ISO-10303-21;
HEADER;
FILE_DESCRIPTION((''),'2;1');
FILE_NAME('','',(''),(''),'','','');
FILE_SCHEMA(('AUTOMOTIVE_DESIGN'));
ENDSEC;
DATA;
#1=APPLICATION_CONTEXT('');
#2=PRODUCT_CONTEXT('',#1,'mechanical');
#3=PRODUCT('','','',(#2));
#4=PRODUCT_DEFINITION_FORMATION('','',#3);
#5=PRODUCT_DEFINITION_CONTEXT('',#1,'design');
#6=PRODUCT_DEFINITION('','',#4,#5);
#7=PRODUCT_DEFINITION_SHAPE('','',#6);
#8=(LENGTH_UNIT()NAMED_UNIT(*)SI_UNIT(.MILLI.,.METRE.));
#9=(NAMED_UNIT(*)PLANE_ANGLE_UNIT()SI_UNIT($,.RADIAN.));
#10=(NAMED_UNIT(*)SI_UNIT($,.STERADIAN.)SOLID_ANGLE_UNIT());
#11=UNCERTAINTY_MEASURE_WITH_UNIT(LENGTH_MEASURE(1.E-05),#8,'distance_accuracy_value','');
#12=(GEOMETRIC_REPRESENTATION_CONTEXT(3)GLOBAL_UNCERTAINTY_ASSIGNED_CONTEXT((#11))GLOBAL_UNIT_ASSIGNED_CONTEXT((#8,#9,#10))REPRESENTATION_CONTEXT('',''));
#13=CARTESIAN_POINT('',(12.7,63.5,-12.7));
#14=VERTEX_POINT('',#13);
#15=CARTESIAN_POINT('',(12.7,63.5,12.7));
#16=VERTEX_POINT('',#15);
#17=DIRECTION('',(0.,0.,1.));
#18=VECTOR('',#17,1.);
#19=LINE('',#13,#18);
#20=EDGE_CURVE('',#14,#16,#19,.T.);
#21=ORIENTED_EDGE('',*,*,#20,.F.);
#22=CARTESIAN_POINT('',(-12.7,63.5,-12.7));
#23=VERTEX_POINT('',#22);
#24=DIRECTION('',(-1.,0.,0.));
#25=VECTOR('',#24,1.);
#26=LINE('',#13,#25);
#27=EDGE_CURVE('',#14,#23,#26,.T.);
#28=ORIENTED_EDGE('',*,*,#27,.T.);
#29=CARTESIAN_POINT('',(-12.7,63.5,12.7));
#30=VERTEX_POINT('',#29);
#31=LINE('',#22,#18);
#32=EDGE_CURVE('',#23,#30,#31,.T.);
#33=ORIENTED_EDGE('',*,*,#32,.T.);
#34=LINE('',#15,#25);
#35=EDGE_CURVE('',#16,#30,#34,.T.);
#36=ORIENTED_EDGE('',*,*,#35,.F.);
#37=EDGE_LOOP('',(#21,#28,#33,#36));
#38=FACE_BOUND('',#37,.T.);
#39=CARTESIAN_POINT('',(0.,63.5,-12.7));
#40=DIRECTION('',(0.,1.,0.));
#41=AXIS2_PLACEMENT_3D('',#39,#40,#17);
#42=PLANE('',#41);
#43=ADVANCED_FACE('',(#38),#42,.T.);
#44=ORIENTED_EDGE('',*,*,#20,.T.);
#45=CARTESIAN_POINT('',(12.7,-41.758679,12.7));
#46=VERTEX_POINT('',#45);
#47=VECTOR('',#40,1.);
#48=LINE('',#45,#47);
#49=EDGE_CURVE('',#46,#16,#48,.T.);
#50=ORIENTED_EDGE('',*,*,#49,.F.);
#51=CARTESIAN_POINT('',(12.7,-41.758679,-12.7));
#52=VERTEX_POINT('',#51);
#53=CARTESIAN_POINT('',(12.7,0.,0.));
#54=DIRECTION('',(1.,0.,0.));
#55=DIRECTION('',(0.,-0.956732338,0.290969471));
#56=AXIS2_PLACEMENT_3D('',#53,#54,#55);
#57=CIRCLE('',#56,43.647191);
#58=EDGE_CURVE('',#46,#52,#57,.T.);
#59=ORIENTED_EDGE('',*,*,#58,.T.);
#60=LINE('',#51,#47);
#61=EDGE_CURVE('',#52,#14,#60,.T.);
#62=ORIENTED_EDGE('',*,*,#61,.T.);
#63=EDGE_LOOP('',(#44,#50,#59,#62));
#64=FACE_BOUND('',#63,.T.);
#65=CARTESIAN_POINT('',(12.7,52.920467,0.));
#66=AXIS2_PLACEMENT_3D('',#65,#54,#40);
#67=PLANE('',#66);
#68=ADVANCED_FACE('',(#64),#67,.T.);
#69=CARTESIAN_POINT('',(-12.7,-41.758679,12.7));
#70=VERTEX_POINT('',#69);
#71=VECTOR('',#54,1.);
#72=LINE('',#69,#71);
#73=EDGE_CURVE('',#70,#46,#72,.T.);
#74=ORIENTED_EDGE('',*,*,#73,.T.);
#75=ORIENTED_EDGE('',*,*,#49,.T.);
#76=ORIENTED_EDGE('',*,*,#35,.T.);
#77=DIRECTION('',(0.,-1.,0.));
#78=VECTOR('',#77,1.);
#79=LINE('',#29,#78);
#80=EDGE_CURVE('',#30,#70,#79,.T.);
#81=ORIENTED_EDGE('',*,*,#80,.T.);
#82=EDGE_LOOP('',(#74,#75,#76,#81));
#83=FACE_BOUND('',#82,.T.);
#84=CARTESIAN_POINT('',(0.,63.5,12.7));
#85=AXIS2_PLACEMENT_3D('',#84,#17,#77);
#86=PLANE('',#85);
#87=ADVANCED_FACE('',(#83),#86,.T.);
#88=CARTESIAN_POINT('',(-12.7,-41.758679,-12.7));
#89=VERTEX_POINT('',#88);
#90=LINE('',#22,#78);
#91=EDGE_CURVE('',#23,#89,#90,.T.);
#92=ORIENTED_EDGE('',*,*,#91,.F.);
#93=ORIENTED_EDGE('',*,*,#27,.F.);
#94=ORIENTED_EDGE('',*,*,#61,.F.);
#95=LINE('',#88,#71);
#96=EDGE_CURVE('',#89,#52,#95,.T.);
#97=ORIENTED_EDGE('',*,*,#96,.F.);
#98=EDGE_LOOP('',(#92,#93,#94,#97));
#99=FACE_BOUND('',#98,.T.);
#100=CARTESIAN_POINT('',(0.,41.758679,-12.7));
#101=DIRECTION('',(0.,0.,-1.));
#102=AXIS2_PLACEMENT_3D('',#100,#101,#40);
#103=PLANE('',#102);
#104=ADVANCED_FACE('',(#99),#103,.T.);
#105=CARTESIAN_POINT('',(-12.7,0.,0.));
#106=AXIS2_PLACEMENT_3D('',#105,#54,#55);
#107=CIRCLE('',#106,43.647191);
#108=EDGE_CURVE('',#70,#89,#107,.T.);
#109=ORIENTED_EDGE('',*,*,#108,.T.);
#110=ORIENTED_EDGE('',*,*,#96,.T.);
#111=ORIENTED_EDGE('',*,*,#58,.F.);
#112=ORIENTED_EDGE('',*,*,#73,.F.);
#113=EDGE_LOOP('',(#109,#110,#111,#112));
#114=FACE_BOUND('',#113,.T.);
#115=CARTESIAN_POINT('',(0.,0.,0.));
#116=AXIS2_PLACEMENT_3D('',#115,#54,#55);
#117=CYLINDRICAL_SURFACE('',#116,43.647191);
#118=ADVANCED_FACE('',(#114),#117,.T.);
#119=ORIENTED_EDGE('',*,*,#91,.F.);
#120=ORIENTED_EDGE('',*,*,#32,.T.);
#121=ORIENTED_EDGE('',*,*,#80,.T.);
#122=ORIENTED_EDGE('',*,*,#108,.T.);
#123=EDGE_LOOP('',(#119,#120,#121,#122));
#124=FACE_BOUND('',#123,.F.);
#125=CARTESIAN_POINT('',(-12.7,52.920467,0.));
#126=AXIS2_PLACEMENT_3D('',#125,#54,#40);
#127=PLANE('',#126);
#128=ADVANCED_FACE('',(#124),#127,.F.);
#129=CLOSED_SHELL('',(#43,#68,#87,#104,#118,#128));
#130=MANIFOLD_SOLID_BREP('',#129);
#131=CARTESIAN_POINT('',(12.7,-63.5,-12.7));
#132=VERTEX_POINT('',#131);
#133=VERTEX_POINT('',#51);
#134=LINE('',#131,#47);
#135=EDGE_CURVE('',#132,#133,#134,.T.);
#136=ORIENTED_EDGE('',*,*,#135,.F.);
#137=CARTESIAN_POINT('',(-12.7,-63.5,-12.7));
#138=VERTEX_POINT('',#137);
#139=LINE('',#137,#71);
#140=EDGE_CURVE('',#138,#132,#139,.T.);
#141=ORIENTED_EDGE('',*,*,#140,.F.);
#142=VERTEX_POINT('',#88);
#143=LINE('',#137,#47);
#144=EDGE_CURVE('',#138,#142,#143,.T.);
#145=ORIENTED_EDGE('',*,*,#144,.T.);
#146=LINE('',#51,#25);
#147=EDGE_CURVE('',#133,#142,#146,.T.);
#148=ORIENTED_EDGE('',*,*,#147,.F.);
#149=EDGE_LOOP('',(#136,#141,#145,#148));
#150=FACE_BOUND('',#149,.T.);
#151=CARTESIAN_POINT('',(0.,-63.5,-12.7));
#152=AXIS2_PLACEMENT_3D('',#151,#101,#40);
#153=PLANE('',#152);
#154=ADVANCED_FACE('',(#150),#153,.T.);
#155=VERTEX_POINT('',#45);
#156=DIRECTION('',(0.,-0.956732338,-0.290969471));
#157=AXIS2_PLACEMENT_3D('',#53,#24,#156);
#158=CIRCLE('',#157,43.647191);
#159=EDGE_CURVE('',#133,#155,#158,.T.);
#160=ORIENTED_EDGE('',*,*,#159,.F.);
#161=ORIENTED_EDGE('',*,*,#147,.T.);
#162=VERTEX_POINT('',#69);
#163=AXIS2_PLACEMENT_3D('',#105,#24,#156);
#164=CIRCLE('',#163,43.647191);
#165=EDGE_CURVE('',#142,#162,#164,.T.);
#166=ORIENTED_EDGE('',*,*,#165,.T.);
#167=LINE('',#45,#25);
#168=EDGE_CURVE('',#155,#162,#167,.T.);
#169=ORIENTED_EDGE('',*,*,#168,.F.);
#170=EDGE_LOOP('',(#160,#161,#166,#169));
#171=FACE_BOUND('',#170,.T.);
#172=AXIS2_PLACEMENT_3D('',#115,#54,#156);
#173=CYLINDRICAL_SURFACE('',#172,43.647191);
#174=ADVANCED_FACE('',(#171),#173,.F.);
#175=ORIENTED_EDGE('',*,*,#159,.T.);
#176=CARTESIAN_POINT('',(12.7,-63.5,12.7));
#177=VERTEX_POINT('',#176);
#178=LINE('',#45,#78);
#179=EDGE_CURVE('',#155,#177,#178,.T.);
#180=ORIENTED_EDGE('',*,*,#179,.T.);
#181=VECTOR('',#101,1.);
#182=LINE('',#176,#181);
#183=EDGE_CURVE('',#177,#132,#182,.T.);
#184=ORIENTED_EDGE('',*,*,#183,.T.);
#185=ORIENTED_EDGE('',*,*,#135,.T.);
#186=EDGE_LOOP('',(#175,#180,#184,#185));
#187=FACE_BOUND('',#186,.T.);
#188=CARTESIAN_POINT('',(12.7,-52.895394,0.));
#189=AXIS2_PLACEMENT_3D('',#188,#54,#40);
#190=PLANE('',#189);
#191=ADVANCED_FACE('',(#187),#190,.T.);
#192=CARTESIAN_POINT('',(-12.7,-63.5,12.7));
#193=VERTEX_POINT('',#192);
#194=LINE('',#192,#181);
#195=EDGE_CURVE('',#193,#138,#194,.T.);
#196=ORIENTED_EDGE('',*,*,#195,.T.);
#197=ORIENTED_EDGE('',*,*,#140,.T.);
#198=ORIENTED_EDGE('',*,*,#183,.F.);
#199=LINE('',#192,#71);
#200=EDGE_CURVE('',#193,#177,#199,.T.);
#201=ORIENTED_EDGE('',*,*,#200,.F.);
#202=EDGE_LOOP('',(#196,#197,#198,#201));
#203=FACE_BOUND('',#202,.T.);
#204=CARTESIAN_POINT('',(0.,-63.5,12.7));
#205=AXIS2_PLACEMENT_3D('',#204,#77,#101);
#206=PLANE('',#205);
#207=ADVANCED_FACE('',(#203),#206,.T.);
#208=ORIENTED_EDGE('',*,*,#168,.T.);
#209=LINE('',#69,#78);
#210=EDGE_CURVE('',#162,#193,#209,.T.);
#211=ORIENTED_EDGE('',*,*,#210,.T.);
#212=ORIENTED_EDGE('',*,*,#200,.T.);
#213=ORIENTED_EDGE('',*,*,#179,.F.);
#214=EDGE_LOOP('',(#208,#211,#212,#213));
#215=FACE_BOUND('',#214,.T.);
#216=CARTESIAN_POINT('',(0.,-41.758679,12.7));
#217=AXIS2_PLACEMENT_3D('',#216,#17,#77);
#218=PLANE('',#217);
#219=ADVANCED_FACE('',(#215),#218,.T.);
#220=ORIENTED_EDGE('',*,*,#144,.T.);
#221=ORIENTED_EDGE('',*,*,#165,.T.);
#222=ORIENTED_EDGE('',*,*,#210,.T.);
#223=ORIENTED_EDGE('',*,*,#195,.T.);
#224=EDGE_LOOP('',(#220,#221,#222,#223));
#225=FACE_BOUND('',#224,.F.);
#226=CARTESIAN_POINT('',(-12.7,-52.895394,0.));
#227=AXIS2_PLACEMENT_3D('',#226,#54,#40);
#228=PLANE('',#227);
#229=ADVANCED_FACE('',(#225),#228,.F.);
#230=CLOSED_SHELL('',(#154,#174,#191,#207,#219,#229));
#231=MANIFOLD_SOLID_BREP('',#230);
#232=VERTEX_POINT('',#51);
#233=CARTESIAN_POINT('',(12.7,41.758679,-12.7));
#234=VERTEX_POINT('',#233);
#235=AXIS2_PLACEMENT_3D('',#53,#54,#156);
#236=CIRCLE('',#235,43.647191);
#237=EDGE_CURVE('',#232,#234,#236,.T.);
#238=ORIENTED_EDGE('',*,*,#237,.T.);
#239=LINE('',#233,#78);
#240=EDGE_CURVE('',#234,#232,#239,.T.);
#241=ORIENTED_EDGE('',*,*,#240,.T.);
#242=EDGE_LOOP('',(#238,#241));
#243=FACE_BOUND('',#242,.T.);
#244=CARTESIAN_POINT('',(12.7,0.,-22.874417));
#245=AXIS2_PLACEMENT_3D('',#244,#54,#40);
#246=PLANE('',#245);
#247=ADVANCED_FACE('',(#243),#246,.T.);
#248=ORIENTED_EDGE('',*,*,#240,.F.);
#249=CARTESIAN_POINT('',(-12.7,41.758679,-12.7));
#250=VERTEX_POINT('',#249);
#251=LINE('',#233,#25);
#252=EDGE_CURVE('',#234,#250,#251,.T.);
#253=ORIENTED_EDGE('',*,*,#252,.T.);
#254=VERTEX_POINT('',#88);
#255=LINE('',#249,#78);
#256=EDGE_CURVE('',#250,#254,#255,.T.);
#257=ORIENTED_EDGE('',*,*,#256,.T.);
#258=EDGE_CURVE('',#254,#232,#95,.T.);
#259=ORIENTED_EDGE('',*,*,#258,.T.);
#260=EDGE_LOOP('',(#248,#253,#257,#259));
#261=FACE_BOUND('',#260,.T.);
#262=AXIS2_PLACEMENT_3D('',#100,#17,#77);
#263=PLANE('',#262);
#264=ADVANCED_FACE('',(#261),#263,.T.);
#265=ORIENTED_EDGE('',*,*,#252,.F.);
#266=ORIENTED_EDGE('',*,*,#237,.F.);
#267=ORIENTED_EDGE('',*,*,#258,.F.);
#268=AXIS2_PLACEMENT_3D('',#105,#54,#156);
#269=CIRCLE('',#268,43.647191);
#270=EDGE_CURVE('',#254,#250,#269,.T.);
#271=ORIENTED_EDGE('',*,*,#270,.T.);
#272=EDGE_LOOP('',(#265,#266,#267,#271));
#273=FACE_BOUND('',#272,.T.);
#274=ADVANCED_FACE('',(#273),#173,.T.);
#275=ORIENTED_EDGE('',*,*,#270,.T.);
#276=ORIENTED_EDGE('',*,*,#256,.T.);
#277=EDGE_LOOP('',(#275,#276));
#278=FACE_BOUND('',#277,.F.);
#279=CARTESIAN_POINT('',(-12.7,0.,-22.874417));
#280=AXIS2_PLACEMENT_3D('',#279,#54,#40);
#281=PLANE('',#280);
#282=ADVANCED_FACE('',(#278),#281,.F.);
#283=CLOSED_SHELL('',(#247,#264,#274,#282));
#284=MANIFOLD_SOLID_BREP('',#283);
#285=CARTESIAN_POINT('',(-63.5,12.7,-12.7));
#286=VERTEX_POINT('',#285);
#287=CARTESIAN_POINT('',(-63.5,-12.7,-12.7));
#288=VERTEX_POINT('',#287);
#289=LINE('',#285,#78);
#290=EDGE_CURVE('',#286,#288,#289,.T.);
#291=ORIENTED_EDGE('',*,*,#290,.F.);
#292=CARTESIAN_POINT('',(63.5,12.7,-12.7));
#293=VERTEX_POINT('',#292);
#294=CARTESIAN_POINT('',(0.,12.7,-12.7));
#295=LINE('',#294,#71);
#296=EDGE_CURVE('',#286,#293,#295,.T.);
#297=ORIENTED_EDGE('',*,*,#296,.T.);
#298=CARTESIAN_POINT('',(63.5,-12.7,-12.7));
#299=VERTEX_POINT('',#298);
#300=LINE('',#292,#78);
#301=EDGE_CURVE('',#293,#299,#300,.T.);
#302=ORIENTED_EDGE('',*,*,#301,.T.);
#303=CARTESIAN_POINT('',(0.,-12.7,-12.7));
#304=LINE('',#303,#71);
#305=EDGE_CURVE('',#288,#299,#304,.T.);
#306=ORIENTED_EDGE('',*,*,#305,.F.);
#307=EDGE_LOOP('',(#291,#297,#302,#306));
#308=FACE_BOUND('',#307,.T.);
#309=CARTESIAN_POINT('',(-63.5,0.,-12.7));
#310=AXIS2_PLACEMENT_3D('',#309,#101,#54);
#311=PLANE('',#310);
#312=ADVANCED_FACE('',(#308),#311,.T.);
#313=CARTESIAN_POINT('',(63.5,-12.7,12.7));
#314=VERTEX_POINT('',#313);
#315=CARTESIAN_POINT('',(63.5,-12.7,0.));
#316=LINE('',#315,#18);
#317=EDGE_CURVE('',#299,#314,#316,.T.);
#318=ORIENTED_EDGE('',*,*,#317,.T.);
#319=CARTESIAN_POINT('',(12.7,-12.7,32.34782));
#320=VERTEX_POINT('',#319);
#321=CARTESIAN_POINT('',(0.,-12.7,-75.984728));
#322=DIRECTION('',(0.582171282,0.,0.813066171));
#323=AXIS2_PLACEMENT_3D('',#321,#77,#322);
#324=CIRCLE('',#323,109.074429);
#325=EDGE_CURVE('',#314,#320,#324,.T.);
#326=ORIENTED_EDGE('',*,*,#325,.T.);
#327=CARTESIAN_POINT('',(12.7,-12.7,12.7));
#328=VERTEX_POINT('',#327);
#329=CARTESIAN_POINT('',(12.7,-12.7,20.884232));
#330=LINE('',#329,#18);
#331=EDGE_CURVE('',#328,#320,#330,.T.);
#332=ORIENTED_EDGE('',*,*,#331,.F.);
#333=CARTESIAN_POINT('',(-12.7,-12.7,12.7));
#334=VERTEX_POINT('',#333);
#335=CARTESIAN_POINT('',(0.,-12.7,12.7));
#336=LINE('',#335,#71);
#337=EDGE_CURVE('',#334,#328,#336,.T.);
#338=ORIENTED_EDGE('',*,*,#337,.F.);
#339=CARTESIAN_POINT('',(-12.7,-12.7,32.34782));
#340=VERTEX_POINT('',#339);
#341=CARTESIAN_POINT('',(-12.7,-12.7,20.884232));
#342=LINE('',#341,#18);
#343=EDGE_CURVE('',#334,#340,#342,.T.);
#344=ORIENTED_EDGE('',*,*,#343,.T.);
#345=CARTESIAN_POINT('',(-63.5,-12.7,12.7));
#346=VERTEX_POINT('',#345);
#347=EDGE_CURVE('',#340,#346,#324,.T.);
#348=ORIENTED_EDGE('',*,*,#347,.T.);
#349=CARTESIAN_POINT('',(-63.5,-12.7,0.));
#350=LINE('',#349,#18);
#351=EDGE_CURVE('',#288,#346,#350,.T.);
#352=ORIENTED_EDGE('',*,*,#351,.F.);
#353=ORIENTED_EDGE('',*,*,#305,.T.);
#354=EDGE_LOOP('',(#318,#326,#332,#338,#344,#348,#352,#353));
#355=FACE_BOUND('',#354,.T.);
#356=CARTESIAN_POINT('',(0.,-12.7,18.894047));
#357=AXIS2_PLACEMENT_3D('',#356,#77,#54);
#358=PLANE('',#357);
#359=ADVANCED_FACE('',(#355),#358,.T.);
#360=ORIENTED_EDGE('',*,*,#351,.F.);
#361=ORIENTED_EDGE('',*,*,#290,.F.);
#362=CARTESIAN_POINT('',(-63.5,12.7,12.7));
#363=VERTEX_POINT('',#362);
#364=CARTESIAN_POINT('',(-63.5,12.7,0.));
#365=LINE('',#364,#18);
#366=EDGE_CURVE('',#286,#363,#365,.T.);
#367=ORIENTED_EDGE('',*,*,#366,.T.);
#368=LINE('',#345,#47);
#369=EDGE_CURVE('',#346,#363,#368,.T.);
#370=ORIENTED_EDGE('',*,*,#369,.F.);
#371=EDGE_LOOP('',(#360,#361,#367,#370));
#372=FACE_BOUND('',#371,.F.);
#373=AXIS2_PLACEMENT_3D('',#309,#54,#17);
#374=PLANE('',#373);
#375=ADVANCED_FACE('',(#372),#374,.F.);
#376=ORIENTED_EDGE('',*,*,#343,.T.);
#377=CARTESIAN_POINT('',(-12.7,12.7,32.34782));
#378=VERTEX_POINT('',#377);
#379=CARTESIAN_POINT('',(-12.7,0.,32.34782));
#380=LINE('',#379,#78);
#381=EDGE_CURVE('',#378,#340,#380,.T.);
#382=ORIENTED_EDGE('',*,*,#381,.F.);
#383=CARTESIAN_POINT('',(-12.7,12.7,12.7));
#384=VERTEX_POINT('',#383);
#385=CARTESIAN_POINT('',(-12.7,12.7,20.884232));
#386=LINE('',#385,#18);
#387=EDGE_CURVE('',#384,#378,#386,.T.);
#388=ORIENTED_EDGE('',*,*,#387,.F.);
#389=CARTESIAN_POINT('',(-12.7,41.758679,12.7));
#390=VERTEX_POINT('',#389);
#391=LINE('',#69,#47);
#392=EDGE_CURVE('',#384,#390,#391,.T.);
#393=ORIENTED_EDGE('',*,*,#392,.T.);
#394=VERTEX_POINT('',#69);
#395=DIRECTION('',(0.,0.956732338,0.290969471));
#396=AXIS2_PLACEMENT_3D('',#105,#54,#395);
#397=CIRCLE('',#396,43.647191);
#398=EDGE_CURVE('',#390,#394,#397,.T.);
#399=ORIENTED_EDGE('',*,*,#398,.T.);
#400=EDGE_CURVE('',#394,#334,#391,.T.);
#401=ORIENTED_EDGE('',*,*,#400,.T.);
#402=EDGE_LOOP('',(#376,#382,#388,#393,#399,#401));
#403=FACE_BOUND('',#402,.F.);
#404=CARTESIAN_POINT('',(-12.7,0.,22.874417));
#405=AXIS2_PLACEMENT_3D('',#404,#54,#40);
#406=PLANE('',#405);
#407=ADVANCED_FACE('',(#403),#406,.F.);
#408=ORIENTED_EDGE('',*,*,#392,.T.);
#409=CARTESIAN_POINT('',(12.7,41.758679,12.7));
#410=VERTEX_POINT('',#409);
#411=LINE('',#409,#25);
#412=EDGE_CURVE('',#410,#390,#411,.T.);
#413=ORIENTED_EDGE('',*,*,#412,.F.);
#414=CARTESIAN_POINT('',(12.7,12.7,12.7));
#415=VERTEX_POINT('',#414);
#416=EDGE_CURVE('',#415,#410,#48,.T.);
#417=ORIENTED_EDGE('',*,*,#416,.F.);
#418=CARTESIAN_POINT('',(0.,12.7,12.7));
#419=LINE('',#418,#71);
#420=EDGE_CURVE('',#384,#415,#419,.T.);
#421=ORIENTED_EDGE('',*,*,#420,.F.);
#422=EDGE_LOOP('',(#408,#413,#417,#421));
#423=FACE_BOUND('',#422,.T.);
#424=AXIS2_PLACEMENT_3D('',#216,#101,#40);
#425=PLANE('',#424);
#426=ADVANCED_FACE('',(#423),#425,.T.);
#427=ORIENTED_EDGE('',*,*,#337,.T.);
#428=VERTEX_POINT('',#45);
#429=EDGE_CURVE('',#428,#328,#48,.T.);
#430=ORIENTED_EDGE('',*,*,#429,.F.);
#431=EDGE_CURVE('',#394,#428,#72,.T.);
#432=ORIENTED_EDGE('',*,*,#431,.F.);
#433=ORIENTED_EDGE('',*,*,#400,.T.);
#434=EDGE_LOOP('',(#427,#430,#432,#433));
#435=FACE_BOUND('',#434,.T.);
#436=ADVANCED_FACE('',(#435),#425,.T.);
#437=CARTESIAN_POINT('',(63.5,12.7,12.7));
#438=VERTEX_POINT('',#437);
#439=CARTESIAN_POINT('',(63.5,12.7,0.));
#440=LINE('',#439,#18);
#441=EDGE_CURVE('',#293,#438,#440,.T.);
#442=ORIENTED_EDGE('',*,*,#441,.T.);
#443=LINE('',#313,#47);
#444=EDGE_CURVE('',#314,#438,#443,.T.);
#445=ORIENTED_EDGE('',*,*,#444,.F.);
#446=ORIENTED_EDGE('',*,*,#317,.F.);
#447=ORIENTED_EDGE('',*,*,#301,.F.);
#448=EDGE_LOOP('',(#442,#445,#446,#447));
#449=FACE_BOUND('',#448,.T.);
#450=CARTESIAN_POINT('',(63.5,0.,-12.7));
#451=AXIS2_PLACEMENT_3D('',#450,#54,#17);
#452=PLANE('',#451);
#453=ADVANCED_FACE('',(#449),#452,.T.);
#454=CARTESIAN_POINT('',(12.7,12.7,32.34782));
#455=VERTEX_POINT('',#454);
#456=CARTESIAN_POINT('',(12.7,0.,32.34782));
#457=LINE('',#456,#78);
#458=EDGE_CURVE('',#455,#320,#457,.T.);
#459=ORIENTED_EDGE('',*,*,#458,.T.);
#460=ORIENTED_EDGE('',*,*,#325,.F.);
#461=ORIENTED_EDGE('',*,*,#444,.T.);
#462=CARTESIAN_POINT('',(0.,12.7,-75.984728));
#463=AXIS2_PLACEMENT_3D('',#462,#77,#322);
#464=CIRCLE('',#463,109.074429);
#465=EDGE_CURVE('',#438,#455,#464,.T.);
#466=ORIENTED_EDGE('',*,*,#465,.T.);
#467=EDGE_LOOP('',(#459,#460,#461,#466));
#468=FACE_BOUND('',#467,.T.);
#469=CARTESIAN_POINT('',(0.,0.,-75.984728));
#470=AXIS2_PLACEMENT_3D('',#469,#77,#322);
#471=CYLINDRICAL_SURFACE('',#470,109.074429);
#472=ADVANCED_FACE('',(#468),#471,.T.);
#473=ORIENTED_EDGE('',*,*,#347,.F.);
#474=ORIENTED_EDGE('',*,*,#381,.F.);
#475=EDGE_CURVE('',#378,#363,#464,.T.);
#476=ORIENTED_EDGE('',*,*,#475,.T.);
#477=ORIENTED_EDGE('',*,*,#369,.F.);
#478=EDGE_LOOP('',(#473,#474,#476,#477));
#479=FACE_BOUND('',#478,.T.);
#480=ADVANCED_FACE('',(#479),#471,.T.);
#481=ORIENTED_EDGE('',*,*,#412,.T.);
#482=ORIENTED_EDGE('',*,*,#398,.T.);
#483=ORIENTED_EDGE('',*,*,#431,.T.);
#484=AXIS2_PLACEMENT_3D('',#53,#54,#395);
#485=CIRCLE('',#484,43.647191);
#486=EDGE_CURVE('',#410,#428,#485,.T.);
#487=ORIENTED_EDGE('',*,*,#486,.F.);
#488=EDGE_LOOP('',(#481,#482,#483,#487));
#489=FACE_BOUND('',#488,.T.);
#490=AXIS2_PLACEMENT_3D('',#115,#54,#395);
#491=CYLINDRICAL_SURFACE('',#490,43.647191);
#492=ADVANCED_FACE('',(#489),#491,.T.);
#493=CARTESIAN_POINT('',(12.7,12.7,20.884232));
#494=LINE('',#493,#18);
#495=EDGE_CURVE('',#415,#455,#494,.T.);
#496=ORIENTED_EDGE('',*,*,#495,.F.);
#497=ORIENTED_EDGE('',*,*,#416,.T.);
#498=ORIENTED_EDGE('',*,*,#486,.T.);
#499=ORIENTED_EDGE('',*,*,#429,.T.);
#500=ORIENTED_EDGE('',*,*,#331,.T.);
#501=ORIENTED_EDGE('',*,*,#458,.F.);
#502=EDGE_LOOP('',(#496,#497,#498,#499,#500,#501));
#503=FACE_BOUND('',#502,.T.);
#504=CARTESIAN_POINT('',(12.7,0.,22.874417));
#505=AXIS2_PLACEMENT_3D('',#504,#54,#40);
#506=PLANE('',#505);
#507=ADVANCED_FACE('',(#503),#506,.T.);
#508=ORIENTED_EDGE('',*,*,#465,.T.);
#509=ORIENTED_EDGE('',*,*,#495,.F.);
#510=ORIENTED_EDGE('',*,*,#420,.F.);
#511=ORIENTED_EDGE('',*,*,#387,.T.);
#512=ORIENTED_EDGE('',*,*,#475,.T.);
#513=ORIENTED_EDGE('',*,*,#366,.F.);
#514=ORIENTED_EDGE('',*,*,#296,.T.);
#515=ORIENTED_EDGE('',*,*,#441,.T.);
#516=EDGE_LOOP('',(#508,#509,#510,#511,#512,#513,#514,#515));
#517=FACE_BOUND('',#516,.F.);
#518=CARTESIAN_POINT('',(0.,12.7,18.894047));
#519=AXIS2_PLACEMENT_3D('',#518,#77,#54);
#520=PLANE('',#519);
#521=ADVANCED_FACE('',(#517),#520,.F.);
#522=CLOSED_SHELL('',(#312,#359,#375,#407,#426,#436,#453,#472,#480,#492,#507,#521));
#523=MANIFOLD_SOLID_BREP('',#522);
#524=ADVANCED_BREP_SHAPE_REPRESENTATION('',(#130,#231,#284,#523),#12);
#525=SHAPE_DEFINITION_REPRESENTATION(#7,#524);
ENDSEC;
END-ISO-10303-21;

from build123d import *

# Parameters (mm, degrees)
F0_W     = 127
F0_H     = 25.4
F2_DEPTH = 12.7
F3_DEPTH = 12.7
F4_DEPTH = 12.7
F5_DEPTH = 12.7
F6_DEPTH = 12.7
F7_DEPTH = 12.7
F8_DEPTH = 12.7


with BuildPart() as f2:
    # F0 (on Front) → F2 (new body, symmetric)
    with BuildSketch(Plane.XZ):
        Rectangle(F0_W, F0_H)
    extrude(amount=F2_DEPTH, both=True)

    # F0 (on Front) → F4 (join, symmetric)
    with BuildSketch(Plane.XZ):
        with BuildLine():
            ThreePointArc((63.5, 12.7), (0, 33.089700587), (-63.5, 12.7))
            Line((-63.5, 12.7), (63.5, 12.7))
        make_face()
    extrude(amount=F4_DEPTH, both=True)

    # F1 (on Right) → F5 (join, symmetric)
    with BuildSketch(Plane.YZ):
        with BuildLine():
            ThreePointArc((41.7586787839, 12.7), (0, 43.6471906745), (-41.7586787839, 12.7))
            Line((-41.7586787839, 12.7), (41.7586787839, 12.7))
        make_face()
    extrude(amount=F5_DEPTH, both=True)


with BuildPart() as f3:
    # F1 (on Right) → F3 (new body, symmetric)
    with BuildSketch(Plane.YZ):
        with BuildLine():
            Line((-41.7586787839, 12.7), (-63.5, 12.7))
            Line((-63.5, 12.7), (-63.5, -12.7))
            Line((-63.5, -12.7), (-41.7586787839, -12.7))
            ThreePointArc((-41.7586787839, -12.7), (-43.6471906745, 0), (-41.7586787839, 12.7))
        make_face()
    extrude(amount=F3_DEPTH, both=True)


with BuildPart() as f6:
    # F1 (on Right) → F6 (new body, symmetric)
    with BuildSketch(Plane.YZ):
        with BuildLine():
            Line((41.7586787839, 12.7), (-41.7586787839, 12.7))
            ThreePointArc((-41.7586787839, 12.7), (-43.6471906745, 0), (-41.7586787839, -12.7))
            Line((-41.7586787839, -12.7), (41.7586787839, -12.7))
            ThreePointArc((41.7586787839, -12.7), (43.1724812177, -6.4198223722), (43.6471906745, 0))
            ThreePointArc((43.6471906745, 0), (43.1724812177, 6.4198223722), (41.7586787839, 12.7))
        make_face()
    extrude(amount=F6_DEPTH, both=True)

    # F1 (on Right) → F8 (join, symmetric)
    with BuildSketch(Plane.YZ):
        with BuildLine():
            Line((63.5, 12.7), (41.7586787839, 12.7))
            ThreePointArc((41.7586787839, 12.7), (43.1724812177, 6.4198223722), (43.6471906745, 0))
            ThreePointArc((43.6471906745, 0), (43.1724812177, -6.4198223722), (41.7586787839, -12.7))
            Line((41.7586787839, -12.7), (63.5, -12.7))
            Line((63.5, -12.7), (63.5, 12.7))
        make_face()
    extrude(amount=F8_DEPTH, both=True)


with BuildPart() as f7:
    # F1 (on Right) → F7 (new body, symmetric)
    with BuildSketch(Plane.YZ):
        with BuildLine():
            Line((41.7586787839, -12.7), (-41.7586787839, -12.7))
            ThreePointArc((-41.7586787839, -12.7), (0, -43.6471906745), (41.7586787839, -12.7))
        make_face()
    extrude(amount=F7_DEPTH, both=True)


solid = Compound([f2.part, f3.part, f6.part, f7.part])
